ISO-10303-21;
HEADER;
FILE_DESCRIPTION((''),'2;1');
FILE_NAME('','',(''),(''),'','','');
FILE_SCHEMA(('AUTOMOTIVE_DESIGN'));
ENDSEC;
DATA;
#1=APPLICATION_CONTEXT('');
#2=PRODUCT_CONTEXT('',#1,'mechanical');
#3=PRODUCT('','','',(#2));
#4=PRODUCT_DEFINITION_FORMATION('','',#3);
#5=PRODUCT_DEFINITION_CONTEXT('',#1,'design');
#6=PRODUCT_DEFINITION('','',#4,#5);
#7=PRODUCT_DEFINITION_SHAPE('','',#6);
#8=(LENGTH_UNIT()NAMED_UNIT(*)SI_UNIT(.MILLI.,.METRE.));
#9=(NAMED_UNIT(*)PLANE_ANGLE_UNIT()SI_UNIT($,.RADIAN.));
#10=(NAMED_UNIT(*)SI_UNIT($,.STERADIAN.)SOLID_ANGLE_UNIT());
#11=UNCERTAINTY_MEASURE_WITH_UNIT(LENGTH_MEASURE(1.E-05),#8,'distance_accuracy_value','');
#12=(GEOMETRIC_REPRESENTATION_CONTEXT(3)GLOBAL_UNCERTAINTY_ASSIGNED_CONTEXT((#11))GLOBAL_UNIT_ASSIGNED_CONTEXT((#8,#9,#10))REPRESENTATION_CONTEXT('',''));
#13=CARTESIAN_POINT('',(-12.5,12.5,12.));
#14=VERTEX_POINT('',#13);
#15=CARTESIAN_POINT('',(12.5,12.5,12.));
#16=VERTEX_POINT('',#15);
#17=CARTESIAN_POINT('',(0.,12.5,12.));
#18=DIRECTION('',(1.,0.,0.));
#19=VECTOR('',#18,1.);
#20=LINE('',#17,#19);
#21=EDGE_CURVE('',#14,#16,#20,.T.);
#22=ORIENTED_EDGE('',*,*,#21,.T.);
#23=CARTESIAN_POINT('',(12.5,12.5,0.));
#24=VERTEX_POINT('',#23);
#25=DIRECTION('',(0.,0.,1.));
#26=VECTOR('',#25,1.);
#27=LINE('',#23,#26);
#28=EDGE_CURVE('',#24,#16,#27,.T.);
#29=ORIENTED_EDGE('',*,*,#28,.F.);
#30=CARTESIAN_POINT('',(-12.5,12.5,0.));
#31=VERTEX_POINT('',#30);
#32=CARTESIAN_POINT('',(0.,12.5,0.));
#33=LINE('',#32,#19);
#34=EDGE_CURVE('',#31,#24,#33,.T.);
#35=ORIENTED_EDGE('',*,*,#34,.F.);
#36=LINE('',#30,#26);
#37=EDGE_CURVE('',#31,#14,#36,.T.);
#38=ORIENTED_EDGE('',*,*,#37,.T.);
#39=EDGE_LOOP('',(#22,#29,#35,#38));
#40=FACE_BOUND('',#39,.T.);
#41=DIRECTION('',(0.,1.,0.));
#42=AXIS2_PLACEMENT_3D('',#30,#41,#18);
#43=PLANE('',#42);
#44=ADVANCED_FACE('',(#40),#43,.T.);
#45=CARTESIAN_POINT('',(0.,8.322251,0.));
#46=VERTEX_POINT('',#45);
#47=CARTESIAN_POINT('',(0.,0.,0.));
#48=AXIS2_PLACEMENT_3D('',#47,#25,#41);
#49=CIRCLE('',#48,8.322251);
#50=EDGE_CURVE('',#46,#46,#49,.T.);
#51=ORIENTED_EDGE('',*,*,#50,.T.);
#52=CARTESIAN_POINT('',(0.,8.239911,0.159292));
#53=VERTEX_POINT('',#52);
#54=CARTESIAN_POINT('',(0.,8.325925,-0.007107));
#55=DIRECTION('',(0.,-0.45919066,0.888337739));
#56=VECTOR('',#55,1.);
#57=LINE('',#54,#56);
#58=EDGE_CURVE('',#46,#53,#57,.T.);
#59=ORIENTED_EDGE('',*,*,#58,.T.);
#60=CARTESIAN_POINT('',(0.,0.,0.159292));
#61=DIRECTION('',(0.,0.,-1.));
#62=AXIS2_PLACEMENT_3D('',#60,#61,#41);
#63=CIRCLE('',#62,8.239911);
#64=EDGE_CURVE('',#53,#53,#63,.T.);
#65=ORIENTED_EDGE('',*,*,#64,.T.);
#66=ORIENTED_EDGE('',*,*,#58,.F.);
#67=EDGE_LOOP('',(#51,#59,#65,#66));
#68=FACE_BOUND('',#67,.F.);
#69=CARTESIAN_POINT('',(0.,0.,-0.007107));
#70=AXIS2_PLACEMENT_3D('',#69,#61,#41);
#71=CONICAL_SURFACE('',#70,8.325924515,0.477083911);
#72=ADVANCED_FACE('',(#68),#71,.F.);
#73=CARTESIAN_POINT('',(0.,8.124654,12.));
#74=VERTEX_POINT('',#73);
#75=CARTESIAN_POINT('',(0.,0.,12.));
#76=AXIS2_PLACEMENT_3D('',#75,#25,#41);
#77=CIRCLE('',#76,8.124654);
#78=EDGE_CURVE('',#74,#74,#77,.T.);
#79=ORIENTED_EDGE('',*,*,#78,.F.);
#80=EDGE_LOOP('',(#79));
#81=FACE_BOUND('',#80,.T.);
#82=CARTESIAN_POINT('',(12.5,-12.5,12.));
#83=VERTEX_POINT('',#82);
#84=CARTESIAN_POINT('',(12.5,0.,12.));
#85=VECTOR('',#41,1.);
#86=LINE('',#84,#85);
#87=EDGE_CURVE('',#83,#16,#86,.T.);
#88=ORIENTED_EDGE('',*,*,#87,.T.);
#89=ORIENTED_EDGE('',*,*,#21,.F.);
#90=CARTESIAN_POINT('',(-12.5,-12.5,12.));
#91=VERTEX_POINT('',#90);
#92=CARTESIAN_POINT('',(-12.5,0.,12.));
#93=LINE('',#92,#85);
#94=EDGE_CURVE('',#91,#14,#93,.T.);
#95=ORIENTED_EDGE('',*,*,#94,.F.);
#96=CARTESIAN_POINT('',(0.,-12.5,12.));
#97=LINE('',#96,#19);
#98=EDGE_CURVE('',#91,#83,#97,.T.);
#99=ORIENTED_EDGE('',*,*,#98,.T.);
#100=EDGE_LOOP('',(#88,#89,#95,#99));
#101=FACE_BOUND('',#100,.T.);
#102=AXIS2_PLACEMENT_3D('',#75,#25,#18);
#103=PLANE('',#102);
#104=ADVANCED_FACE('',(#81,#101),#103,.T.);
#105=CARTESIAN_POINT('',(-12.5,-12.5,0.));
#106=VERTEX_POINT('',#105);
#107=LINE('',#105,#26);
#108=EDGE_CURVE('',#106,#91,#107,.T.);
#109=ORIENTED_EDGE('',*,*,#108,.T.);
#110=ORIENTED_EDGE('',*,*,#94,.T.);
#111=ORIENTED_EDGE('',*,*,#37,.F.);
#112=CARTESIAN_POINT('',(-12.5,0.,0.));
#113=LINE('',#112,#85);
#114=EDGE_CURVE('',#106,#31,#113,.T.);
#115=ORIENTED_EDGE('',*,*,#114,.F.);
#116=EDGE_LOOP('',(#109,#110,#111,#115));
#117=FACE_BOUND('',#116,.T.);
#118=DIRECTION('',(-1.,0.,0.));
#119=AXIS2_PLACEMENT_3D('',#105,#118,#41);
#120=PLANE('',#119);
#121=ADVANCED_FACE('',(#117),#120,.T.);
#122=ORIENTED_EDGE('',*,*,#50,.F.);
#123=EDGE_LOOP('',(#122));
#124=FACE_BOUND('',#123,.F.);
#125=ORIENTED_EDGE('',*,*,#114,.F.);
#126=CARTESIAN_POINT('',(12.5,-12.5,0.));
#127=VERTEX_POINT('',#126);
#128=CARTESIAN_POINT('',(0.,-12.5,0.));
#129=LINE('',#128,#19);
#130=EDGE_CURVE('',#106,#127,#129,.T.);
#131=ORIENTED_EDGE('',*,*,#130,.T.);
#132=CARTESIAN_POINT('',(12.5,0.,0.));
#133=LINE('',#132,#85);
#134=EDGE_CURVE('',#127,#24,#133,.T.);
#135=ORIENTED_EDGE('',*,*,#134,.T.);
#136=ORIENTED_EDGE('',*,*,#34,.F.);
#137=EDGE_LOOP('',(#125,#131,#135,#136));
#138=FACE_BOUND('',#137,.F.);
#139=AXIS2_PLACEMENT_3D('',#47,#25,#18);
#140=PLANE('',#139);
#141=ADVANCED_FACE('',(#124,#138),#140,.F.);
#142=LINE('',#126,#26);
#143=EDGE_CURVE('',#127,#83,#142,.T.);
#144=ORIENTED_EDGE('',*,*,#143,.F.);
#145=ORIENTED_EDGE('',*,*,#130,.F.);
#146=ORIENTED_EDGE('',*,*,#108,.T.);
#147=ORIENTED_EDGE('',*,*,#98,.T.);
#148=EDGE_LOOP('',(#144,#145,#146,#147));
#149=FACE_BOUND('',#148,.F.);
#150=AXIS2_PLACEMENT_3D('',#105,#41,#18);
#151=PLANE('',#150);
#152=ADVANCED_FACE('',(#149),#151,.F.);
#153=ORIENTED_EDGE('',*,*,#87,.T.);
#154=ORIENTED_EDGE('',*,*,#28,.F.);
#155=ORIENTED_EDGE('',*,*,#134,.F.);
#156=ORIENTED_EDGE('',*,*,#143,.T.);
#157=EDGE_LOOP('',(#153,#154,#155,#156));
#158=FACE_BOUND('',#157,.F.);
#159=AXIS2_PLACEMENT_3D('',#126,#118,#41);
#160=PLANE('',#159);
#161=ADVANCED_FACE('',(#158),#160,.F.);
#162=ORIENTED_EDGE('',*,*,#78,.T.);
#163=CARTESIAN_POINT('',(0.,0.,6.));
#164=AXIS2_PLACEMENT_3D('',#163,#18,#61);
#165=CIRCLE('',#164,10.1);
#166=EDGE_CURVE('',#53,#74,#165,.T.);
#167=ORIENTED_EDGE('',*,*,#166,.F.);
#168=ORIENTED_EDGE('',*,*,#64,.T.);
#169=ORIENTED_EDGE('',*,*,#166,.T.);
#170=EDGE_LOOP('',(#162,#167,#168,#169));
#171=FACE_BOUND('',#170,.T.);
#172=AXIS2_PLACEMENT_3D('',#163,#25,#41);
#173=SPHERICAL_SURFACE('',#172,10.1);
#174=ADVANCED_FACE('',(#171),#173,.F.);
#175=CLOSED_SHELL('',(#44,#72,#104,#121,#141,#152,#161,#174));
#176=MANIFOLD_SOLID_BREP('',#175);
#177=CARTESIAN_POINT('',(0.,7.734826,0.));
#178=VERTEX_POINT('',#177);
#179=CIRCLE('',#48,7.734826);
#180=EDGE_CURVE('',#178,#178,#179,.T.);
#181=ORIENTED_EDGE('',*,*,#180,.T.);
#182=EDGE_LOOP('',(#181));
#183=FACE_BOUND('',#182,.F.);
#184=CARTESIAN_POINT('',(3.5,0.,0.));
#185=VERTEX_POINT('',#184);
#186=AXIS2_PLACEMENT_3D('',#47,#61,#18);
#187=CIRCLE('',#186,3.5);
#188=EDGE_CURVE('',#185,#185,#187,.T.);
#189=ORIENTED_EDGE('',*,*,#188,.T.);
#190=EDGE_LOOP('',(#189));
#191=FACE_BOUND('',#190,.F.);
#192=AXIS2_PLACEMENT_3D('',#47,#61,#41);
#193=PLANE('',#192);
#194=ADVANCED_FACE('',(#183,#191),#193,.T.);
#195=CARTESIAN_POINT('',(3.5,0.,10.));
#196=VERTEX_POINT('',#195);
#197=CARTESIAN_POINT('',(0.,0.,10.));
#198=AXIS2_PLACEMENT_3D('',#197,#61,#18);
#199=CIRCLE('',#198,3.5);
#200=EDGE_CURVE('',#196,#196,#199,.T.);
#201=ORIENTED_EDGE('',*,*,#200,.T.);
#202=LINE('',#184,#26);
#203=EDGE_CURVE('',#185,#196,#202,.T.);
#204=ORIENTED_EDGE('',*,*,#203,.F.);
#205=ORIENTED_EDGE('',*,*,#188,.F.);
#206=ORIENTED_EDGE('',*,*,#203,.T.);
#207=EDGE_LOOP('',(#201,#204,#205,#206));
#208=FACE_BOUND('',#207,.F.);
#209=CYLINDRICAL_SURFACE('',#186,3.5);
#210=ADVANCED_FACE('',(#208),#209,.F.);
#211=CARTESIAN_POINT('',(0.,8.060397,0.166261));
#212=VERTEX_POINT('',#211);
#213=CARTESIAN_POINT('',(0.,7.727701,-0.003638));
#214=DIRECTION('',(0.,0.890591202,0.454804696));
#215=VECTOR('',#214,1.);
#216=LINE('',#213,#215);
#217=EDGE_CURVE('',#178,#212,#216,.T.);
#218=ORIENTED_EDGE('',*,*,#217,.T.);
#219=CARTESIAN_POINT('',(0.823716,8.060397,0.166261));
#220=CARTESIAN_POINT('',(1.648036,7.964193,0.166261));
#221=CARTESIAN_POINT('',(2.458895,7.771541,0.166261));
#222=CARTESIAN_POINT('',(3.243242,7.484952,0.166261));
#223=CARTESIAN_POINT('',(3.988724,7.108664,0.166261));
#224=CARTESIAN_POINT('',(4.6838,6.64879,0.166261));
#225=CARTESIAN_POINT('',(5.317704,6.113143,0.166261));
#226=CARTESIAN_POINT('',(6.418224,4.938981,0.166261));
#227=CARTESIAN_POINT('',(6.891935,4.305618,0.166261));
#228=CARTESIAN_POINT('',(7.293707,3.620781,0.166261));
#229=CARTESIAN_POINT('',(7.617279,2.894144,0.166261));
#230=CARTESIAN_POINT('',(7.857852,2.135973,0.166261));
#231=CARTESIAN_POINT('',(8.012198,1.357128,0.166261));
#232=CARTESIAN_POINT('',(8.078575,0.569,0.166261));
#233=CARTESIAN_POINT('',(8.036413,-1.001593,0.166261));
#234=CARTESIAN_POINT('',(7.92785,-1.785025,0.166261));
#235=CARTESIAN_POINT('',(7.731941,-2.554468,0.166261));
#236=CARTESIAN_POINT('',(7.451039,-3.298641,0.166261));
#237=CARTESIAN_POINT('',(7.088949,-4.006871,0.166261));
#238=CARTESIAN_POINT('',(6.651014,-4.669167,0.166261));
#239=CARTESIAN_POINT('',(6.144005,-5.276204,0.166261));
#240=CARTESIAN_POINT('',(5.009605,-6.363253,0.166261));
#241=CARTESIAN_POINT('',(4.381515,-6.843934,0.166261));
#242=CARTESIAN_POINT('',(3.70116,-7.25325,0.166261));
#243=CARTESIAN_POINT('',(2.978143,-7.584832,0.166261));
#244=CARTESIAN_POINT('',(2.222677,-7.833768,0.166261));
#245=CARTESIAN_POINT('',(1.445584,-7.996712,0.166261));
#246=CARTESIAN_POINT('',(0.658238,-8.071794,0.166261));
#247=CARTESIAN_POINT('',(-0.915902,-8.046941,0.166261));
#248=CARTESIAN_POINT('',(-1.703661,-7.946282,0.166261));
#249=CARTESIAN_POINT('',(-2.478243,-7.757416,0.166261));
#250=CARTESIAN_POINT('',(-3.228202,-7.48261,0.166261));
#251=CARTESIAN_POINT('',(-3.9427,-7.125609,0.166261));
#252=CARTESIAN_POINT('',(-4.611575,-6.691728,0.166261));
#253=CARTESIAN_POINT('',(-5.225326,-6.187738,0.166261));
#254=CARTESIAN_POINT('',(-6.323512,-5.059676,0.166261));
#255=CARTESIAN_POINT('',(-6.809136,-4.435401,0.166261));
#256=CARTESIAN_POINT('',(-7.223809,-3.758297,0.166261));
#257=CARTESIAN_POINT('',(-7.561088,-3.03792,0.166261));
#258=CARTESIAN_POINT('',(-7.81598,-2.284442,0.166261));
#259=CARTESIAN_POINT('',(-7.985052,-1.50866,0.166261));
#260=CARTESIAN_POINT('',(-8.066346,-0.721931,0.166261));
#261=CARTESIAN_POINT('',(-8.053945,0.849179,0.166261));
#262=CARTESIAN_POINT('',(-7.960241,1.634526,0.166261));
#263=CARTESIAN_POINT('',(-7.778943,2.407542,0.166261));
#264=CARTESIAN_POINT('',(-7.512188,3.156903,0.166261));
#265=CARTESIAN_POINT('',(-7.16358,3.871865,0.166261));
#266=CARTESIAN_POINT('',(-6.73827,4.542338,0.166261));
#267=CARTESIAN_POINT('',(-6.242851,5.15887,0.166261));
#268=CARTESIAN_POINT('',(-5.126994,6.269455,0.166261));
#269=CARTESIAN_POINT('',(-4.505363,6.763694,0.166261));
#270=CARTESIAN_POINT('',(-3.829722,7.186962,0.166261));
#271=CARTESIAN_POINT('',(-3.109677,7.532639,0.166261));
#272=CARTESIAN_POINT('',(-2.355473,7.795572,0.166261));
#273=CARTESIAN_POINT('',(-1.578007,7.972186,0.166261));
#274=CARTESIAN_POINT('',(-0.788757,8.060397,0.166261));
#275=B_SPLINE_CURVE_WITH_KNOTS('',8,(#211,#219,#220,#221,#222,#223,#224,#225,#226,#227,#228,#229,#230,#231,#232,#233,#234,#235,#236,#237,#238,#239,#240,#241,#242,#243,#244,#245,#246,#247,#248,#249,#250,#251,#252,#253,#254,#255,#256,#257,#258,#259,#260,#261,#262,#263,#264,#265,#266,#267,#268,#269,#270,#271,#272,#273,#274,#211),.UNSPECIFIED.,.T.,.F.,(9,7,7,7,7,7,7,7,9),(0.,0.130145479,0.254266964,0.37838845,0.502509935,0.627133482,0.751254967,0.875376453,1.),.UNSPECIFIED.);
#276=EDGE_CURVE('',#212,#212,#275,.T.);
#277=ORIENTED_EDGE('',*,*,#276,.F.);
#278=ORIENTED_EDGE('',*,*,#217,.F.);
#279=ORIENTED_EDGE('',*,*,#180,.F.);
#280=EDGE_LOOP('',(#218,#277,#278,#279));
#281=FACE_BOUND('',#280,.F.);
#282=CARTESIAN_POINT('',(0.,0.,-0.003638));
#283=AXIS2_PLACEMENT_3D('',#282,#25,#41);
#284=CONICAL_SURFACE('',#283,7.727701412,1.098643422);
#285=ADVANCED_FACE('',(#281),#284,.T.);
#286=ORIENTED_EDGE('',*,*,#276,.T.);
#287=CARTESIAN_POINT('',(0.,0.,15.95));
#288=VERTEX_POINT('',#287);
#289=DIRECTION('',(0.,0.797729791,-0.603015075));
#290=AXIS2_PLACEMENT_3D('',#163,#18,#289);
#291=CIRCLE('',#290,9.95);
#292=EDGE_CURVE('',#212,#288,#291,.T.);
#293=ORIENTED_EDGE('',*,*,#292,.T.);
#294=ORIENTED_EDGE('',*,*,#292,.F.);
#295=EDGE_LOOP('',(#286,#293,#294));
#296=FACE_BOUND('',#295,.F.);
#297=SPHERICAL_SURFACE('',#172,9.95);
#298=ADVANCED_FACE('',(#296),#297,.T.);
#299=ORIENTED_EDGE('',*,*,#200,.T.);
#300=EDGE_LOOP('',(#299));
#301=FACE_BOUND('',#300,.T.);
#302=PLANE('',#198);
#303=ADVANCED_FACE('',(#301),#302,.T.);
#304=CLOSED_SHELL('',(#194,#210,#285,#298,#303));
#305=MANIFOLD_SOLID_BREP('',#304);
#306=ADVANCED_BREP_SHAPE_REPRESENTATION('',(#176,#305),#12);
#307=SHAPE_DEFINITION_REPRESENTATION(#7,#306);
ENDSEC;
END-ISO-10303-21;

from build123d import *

# Parameters (mm, degrees)
F0_W     = 25
F0_H     = 25
F1_DEPTH = 12
F6_R     = 3.5
F7_DEPTH = 10


# Not quite as in the source:
# - a fillet or chamfer that OpenCascade refuses, or shapes differently, is made with other operations: its cross-section is extruded or revolved along the edge and cut away or added


with BuildPart() as f1:
    # F0 (on Top) → F1 (new body)
    with BuildSketch(Plane.XY):
        Rectangle(F0_W, F0_H)
    extrude(amount=F1_DEPTH)

    # F2 (on Right) → F3 (revolve, cut)
    with BuildSketch(Plane.YZ):
        with BuildLine():
            Line((0, 16.1), (0, -4.1))
            ThreePointArc((0, -4.1), (10.1, 6), (0, 16.1))
        make_face()
    revolve(axis=Axis((0, 0, 6), (0, 0, -1)), mode=Mode.SUBTRACT)

    # F8: chamfer of 0.2 on 1 edges, made by hand

    # F8_s1 → F8_t2 (revolve, cut)
    with BuildSketch(Plane.YZ):
        with BuildLine():
            Line((8.325924515, -0.0071067019), (8.2362376015, 0.1663991572))
            Line((8.2362376015, 0.1663991572), (8.2329742703, 0.1687123087))
            ThreePointArc((8.2329742703, 0.1687123087), (8.1804857118, 0.0831706532), (8.1214361541, 0.0023762376))
            Line((8.1214361541, 0.0023762376), (8.1246538388, -0.004))
            ThreePointArc((8.1246538388, -0.004), (8.2252891769, -0.004), (8.325924515, -0.0111067019))
            Line((8.325924515, -0.0111067019), (8.325924515, -0.0071067019))
        make_face()
    revolve(axis=Axis((0, 0, 0), (0, 0, 1)), mode=Mode.SUBTRACT)


with BuildPart() as f5:
    # F4 (on Right) → F5 (revolve)
    with BuildSketch(Plane.YZ):
        with BuildLine():
            Line((0, 0), (7.9374114168, 0))
            ThreePointArc((7.9374114168, 0), (8.9079318587, 10.432973043), (0, 15.95))
            Line((0, 15.95), (0, 0))
        make_face()
    revolve(axis=Axis((0, 0, 7.975), (0, 0, -1)))

    # F6 (on face) → F7 (cut)
    with BuildSketch(Plane(origin=(0, 0, 0), x_dir=(1, 0, 0), z_dir=(0, 0, -1))):
        Circle(F6_R)
    extrude(amount=-F7_DEPTH, mode=Mode.SUBTRACT)

    # F8#2: chamfer of 0.2 on 1 edges, made by hand

    # F8_2_s1 → F8_2_t2 (revolve, cut)
    with BuildSketch(Plane.YZ):
        with BuildLine():
            Line((7.7277014115, -0.0036384376), (8.0675214314, 0.169899927))
            Line((8.0675214314, 0.169899927), (8.0707617919, 0.1675547055))
            ThreePointArc((8.0707617919, 0.1675547055), (8.0046815514, 0.0833126447), (7.940602336, -0.0024120603))
            Line((7.940602336, -0.0024120603), (7.9374114168, -0.004))
            ThreePointArc((7.9374114168, -0.004), (7.8325564142, -0.004), (7.7277014115, -0.0076384376))
            Line((7.7277014115, -0.0076384376), (7.7277014115, -0.0036384376))
        make_face()
    revolve(axis=Axis((0, 0, 0), (0, 0, -1)), mode=Mode.SUBTRACT)


solid = Compound([f1.part, f5.part])
